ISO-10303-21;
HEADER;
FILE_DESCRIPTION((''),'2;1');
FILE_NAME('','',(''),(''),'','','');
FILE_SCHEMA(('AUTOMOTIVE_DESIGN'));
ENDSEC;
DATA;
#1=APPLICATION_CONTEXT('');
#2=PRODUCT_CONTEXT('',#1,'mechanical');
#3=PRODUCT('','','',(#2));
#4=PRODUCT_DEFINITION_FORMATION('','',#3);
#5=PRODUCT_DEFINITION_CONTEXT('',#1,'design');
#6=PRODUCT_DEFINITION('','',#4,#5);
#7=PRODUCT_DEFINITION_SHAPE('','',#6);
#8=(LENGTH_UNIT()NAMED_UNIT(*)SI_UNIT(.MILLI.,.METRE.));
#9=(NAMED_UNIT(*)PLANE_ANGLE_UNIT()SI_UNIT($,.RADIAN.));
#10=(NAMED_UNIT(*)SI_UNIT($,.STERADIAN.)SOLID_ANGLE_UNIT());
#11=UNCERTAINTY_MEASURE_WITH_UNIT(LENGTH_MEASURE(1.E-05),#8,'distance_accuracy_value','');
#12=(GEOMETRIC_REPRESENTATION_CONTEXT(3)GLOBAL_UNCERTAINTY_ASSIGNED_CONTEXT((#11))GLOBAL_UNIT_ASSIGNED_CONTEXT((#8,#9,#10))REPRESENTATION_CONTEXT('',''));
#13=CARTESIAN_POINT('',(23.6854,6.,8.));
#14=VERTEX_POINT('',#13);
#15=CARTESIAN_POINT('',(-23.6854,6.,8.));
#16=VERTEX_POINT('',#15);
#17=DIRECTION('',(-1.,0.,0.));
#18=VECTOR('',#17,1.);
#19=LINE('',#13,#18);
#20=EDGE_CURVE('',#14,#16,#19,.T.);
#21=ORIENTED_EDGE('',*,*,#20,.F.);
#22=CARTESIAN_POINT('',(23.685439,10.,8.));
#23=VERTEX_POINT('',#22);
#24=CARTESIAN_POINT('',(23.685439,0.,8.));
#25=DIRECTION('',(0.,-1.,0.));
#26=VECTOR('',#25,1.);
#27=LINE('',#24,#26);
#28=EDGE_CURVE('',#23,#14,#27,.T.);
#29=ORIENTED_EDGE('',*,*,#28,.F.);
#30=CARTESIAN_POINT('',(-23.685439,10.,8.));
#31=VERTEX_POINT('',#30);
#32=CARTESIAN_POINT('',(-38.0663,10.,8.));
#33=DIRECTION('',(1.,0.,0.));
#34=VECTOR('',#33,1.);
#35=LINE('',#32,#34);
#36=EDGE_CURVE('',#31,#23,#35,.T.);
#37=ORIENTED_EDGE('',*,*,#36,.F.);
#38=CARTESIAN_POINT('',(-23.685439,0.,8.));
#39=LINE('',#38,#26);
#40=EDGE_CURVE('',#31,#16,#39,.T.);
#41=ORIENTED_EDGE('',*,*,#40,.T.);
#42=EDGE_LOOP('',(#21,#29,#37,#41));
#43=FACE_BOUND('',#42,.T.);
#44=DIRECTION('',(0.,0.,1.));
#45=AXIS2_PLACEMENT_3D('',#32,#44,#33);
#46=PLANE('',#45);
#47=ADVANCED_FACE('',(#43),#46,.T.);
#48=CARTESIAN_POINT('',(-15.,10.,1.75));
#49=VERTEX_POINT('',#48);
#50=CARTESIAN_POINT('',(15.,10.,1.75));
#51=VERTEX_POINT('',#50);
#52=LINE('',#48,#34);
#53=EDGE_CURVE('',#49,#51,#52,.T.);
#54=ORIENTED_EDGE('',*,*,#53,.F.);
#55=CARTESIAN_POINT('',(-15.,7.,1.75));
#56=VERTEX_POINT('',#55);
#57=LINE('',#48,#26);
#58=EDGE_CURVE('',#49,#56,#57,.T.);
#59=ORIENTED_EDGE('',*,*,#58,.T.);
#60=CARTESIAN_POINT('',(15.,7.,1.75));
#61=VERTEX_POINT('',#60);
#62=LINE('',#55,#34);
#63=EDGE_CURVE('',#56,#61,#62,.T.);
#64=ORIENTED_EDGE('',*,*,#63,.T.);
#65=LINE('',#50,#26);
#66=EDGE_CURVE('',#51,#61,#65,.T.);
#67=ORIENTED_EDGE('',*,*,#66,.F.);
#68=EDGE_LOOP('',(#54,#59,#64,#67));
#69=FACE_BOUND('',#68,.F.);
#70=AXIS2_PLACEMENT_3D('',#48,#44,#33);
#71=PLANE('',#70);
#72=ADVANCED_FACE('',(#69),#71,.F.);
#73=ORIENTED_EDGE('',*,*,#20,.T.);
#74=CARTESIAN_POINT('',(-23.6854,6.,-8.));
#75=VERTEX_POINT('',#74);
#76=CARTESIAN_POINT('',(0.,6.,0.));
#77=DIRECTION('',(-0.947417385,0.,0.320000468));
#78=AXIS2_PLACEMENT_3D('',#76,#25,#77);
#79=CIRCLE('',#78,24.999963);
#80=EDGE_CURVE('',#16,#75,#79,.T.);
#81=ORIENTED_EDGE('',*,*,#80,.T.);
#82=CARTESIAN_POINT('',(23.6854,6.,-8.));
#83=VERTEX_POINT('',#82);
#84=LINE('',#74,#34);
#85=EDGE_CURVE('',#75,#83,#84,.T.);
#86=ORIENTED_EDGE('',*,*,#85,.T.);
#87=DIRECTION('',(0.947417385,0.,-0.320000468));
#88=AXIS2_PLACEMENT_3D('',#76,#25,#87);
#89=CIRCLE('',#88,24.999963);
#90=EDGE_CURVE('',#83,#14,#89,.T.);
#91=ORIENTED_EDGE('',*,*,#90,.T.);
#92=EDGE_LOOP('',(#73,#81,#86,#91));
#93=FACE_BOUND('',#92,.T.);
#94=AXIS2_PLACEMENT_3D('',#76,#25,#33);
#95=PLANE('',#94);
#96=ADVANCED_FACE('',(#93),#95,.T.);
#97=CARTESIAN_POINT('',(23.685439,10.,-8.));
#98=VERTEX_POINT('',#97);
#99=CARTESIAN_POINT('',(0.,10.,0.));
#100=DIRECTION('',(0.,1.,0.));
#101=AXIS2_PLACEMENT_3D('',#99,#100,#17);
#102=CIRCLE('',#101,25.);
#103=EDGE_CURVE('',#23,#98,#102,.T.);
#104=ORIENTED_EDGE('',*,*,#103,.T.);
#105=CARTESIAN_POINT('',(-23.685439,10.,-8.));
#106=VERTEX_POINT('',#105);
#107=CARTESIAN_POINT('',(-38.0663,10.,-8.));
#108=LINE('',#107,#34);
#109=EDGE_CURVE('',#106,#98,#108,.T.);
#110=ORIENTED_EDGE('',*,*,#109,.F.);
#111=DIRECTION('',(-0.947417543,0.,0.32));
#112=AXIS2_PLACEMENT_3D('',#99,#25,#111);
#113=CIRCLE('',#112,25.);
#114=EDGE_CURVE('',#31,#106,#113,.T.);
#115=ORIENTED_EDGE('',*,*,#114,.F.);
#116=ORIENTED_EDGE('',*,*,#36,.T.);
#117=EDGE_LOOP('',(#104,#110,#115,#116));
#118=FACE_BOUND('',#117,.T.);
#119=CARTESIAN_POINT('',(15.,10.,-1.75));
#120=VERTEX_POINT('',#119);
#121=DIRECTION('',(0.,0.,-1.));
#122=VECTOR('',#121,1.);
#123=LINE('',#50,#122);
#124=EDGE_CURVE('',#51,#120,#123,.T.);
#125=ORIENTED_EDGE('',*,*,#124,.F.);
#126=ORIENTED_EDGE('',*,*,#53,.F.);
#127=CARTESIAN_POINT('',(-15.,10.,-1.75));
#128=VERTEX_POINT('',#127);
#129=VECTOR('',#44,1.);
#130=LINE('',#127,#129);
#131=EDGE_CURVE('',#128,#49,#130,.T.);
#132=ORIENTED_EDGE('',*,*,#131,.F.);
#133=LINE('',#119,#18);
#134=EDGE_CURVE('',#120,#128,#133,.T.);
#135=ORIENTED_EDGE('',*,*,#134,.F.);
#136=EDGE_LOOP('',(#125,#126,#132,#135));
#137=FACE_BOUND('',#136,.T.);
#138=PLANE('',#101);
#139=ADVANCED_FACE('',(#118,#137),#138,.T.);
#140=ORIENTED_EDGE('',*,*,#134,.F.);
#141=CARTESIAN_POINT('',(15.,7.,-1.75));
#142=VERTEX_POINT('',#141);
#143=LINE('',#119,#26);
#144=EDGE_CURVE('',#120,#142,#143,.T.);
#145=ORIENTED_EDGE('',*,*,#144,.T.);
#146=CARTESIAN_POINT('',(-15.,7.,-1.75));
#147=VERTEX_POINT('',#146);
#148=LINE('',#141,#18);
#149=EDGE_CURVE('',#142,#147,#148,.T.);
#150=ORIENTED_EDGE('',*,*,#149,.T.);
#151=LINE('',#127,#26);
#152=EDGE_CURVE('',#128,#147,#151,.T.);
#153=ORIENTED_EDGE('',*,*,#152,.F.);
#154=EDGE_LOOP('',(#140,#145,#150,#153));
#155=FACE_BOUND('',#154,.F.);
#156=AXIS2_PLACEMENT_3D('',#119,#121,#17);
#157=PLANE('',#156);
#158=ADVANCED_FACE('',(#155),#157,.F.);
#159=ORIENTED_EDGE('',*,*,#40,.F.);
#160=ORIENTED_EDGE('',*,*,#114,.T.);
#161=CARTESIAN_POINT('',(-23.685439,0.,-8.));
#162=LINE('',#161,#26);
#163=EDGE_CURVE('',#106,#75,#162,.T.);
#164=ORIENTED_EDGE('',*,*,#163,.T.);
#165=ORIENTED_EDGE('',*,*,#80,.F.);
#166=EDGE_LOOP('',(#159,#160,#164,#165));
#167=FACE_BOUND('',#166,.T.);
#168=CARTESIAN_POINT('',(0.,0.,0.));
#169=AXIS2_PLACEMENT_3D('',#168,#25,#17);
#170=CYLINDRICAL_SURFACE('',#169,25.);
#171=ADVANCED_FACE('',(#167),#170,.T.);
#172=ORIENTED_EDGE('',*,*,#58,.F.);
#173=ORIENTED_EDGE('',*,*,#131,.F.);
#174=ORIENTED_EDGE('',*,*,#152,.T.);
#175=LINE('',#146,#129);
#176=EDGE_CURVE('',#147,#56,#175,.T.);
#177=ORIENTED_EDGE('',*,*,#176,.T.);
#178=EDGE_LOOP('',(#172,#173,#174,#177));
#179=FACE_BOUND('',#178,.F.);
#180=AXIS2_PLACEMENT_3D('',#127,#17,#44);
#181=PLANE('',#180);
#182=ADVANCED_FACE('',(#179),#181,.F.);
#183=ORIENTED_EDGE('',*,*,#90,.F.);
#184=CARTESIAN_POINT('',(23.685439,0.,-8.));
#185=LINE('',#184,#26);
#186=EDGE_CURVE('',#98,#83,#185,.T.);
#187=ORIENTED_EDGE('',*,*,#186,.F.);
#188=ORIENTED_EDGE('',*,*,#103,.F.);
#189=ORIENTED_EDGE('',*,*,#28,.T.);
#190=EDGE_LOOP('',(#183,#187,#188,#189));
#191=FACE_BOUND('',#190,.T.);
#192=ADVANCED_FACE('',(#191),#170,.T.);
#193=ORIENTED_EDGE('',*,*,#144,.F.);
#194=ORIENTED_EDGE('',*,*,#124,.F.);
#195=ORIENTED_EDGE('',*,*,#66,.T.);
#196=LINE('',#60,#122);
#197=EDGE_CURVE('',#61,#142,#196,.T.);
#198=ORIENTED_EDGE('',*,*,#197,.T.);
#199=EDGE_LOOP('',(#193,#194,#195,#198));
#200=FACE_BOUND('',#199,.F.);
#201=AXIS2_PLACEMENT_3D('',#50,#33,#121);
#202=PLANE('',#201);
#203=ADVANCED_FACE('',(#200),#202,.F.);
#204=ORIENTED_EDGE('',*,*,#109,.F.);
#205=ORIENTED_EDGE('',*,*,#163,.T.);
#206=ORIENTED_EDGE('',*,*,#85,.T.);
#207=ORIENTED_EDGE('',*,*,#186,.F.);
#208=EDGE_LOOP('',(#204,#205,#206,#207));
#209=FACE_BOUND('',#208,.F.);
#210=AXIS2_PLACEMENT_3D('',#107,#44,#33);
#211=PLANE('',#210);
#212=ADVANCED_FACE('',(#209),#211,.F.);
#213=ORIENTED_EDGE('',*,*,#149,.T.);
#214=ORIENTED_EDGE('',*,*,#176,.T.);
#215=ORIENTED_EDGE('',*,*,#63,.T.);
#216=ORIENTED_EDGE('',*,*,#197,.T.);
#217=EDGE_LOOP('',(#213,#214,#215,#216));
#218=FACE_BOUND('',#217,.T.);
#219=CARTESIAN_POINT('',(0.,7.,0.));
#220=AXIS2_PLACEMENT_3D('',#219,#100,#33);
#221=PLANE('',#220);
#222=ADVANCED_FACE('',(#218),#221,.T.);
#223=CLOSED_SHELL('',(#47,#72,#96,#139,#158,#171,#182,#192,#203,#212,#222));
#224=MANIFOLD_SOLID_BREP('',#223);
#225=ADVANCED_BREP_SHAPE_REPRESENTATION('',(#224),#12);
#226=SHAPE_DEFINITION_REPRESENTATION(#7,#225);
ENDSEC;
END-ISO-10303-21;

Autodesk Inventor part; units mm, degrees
ref_plane "YZ Plane" through (0, 0, 0) normal (1, 0, 0) x (0, 1, 0)
ref_plane "XZ Plane" through (0, 0, 0) normal (0, 1, 0) x (-1, 0, 0)
ref_plane "XY Plane" through (0, 0, 0) normal (0, 0, 1) x (1, 0, 0)
sketch "Sketch1" plane through (0, 0, 0) normal (0, 1, 0) x (-1, 0, 0)
  circle A0 centre (0, 0) radius 25
  dimension "d2" = 50
extrude "Extrusion1" add sketch "Sketch1" along normal blind 10
sketch "Sketch2" plane through (0, 10, 0) normal (0, 1, 0) x (1, 0, 0)
  line L0 (-15, -1.75) -> (15, -1.75)
  line L1 (15, -1.75) -> (15, 1.75)
  line L2 (15, 1.75) -> (-15, 1.75)
  line L3 (-15, 1.75) -> (-15, -1.75)
  circle A0 centre (0, 0) radius 25 projected
  point P0 (-25, 0)
  point P1 (0, 25)
  dimension "d5" = 30
  dimension "d6" = 3.5
  dimension "d7" = 23.25
  dimension "d8" = 10
extrude "Extrusion2" cut sketch "Sketch2" against normal blind 3 contours L3 L2 L1 L0
sketch "Sketch3" plane through (0, 10, 0) normal (0, 1, 0) x (1, 0, 0)
  line L0 (-38.0663, 8) -> (91.0616, 8)
  line L1 (-15, 1.75) -> (15, 1.75) projected
  arc A0 (91.0616, 8) -> (-38.0663, 8) centre (26.4976, -23.1626) ccw
  circle A1 centre (0, 0) radius 25 construction
  line L2 (-25, 0) -> (81.9095, 0) construction
  line L3 (-38.0663, -8) -> (91.0616, -8)
  arc A2 (-38.0663, -8) -> (91.0616, -8) centre (26.4976, 23.1626) ccw
  point P0 (24.7878, -3.25)
  dimension "d11" = 6.25
extrude "Extrusion3" cut sketch "Sketch3" against normal blind 10
sketch "Sketch4" plane through (0, 0, 0) normal (0, -1, 0) x (1, 0, 0)
  line L0 (-23.6854, -8) -> (23.6854, -8) projected
  arc A0 (23.6854, -8) -> (23.6854, 8) centre (0, 0) ccw projected
  line L1 (23.6854, 8) -> (-23.6854, 8) projected
  arc A1 (-23.6854, 8) -> (-23.6854, -8) centre (0, 0) ccw projected
extrude "Extrusion4" cut sketch "Sketch4" against normal blind 6
properties part number "planetstand"
